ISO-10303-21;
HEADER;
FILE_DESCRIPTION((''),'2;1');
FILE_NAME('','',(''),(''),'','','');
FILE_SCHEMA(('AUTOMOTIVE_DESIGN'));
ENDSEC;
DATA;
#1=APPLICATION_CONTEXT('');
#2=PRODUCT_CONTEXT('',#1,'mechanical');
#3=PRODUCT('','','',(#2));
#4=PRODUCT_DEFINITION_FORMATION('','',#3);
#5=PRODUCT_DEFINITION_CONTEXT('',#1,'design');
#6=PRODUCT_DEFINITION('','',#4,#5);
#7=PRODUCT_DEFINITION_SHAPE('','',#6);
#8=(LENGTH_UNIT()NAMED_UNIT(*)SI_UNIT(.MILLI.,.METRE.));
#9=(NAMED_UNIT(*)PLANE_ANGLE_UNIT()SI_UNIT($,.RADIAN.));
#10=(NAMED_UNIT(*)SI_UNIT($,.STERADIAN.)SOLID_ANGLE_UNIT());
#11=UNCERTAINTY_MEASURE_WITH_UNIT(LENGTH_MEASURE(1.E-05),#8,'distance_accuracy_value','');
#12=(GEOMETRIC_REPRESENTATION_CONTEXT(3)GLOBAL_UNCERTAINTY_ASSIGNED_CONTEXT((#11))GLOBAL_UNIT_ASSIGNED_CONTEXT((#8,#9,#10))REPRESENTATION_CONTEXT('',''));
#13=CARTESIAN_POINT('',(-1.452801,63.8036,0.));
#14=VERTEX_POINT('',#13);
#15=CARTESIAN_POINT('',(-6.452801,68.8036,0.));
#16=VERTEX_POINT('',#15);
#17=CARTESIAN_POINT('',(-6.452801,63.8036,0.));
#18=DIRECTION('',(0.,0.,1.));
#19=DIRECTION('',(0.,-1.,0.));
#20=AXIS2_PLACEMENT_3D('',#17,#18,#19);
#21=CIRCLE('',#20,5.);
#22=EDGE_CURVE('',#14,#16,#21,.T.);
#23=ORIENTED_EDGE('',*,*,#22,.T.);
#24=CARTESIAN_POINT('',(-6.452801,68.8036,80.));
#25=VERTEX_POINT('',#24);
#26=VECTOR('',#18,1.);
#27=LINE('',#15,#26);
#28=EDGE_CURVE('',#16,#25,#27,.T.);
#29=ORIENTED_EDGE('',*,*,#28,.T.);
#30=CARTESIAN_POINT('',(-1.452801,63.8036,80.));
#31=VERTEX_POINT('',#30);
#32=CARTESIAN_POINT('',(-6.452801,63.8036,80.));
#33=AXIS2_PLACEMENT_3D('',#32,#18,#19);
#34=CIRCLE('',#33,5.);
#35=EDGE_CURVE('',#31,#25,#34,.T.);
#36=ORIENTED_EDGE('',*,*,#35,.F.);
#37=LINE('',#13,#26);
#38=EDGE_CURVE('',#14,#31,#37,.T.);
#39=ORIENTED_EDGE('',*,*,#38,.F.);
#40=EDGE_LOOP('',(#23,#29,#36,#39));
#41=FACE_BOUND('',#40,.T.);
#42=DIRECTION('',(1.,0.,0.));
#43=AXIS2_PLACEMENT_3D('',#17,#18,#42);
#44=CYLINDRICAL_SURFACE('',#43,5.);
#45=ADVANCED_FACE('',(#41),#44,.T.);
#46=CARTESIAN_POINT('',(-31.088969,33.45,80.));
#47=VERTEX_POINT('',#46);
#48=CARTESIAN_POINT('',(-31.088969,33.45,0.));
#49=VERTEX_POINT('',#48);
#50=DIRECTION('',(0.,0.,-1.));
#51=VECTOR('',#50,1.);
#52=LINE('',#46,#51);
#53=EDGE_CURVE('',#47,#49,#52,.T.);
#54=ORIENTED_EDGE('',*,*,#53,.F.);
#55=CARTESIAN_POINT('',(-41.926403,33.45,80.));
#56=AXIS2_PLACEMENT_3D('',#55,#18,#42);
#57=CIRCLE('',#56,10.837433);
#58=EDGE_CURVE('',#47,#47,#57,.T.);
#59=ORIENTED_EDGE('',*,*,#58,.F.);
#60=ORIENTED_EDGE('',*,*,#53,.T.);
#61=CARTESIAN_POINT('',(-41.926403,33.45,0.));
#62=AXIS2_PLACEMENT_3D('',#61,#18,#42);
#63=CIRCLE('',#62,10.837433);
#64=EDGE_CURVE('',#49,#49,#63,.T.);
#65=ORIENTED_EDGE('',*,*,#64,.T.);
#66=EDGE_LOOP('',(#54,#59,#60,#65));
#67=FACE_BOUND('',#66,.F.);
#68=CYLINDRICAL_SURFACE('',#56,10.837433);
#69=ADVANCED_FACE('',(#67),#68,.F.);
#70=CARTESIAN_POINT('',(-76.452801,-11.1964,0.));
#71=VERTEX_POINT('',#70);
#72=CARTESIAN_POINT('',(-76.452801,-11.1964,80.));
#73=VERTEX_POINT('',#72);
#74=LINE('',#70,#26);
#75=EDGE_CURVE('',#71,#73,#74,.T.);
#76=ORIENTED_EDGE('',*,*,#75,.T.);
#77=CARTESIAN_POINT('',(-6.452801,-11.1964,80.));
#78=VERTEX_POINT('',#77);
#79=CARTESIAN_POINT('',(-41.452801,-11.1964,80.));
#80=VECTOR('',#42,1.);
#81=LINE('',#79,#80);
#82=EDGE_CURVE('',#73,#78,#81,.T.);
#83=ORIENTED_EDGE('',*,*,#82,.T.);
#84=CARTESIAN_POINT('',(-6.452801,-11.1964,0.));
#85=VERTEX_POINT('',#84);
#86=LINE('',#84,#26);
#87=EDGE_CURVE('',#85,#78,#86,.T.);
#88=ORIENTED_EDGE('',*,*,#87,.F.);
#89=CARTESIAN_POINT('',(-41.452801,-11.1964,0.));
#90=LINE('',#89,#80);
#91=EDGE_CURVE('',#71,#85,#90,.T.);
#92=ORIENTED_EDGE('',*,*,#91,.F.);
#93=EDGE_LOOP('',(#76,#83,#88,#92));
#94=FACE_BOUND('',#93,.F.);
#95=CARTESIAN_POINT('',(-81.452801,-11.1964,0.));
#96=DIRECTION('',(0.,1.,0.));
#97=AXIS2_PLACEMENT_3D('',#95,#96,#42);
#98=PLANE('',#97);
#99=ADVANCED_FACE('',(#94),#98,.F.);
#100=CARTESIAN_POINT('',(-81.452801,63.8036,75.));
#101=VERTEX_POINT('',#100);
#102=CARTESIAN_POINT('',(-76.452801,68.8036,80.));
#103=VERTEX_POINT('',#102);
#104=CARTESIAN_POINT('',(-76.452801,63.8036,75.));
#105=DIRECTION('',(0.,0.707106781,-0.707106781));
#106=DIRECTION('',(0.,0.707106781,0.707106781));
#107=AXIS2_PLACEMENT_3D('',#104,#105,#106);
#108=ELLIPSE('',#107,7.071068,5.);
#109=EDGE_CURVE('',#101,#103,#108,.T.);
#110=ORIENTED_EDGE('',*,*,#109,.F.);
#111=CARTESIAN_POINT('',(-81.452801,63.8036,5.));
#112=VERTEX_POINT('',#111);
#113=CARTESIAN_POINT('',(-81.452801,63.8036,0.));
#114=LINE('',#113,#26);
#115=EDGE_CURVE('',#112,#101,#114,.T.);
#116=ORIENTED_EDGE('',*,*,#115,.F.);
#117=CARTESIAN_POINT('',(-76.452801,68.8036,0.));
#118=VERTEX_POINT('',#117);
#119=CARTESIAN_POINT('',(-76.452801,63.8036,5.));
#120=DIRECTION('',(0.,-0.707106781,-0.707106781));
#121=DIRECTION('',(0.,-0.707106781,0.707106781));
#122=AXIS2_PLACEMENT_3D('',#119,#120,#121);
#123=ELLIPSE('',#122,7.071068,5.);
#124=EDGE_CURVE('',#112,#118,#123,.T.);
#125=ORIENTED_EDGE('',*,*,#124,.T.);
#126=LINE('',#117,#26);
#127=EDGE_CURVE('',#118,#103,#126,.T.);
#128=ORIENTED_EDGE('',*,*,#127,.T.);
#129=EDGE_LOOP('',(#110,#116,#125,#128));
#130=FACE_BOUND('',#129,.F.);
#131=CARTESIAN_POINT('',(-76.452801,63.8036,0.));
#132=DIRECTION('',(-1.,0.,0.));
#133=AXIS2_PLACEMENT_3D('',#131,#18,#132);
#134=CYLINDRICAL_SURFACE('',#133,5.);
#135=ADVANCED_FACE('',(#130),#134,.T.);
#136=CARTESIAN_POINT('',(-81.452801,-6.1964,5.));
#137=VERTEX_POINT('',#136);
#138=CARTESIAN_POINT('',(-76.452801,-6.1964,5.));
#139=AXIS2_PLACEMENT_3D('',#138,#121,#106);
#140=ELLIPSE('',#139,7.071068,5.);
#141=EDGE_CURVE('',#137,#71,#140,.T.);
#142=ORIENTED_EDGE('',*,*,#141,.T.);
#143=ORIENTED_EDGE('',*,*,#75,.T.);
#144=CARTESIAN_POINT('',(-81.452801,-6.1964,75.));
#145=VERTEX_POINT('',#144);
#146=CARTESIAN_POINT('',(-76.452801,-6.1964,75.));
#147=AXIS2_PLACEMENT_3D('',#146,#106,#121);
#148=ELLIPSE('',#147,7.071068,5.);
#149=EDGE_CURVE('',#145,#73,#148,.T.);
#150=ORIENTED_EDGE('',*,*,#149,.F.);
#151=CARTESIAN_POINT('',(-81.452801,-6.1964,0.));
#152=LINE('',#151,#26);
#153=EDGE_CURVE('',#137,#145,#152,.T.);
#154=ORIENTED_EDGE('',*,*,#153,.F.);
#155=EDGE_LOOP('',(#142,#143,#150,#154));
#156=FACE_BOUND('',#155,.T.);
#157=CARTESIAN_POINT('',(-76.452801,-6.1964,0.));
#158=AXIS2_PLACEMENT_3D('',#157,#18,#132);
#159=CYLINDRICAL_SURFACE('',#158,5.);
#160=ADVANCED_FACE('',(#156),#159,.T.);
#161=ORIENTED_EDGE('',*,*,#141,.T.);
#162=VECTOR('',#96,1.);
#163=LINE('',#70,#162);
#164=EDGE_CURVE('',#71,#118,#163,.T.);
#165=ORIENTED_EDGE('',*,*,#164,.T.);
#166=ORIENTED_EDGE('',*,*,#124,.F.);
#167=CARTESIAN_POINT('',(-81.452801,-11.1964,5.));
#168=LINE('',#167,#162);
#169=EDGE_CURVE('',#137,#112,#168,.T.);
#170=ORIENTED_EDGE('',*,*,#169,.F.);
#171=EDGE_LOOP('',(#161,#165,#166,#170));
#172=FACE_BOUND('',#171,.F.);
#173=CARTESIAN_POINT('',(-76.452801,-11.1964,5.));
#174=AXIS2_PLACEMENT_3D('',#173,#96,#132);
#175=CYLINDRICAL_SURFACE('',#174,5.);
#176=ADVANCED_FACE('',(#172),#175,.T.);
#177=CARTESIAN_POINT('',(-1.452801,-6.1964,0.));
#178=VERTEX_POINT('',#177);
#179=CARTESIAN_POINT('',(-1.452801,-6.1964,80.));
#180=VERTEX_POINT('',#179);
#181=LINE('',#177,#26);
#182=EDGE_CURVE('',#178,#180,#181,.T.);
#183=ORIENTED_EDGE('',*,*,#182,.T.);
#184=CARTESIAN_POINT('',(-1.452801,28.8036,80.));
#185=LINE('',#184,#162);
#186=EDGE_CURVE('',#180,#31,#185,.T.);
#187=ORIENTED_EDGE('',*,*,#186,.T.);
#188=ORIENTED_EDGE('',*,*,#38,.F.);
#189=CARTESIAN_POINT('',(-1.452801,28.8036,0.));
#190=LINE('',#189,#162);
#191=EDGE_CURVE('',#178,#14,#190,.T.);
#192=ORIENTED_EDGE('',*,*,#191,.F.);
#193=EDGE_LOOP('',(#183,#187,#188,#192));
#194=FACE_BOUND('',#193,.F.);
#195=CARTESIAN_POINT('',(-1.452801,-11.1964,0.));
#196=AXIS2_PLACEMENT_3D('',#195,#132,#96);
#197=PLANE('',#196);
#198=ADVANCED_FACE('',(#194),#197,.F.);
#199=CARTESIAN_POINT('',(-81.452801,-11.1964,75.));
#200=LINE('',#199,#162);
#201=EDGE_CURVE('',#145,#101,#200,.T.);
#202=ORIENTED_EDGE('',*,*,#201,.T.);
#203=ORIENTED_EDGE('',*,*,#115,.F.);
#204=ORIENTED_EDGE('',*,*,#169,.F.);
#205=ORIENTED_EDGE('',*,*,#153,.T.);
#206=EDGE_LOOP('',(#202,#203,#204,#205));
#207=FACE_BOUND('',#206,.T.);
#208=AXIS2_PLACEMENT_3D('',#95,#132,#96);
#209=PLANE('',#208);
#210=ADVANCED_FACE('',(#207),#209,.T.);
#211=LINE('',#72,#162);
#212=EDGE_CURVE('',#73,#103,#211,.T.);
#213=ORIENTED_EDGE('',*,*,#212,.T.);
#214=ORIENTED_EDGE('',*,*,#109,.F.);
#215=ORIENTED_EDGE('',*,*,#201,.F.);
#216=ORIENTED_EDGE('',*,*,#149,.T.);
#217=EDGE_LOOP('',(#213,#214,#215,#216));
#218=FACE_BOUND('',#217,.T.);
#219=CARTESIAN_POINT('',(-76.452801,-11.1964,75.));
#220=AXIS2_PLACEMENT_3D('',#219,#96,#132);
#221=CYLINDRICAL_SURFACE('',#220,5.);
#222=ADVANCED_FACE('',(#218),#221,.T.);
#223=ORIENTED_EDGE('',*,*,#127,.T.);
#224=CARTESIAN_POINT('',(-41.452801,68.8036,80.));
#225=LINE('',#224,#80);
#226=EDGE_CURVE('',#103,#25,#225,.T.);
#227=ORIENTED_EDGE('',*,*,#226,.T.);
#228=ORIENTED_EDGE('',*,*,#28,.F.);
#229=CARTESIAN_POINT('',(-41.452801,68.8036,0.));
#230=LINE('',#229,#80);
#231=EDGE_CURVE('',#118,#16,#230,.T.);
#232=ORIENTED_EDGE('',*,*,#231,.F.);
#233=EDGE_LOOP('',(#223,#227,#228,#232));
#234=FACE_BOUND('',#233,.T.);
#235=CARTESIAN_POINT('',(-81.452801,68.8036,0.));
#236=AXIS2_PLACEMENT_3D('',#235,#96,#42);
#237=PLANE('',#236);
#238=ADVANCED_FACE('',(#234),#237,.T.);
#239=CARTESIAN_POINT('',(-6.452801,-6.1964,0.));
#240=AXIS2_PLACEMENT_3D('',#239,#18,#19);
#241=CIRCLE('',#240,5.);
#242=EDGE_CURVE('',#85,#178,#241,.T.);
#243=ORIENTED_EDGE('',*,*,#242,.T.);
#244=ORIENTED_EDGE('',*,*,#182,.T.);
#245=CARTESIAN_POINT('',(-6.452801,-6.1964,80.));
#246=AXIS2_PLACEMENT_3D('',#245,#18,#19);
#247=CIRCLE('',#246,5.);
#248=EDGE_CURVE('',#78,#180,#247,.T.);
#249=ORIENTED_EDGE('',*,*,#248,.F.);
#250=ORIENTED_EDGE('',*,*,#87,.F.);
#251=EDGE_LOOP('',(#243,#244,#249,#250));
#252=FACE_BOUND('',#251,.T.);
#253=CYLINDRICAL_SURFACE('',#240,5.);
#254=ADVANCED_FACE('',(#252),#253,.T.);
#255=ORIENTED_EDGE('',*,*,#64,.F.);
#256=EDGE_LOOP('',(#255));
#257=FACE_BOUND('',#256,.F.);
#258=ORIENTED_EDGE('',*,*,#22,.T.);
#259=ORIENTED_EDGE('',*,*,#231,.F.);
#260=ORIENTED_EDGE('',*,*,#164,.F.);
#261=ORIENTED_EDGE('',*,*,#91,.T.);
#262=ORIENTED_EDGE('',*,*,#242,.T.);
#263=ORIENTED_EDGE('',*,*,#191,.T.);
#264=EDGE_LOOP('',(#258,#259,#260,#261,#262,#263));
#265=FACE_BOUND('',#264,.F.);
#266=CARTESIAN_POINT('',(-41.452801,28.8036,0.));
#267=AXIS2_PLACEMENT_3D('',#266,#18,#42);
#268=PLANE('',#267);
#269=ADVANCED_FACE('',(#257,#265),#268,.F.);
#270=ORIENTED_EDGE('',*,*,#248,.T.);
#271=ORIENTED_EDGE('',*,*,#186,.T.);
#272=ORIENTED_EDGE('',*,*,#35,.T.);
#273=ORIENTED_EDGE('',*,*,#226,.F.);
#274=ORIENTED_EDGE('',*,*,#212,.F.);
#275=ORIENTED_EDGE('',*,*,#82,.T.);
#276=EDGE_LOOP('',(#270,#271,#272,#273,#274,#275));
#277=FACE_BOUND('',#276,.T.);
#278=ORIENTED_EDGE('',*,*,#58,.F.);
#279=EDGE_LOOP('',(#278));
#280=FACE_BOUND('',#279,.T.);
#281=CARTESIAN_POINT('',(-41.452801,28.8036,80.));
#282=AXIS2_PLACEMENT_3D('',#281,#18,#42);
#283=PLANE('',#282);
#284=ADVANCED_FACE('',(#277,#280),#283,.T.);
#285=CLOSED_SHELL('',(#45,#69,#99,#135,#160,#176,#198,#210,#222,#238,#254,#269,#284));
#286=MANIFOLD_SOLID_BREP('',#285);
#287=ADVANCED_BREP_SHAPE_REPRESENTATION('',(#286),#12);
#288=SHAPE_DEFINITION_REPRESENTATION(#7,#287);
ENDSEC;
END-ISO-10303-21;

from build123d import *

# Parameters (mm, degrees)
F0_W     = 80
F0_H     = 80
F1_DEPTH = 80
F3_R     = 5
F2_R     = 10.8374332622
F4_DEPTH = 80.001


with BuildPart() as f1:
    # F0 (on Top) → F1 (new body)
    with BuildSketch(Plane.XY):
        with Locations((-41.452800855, 28.8035999984)):
            Rectangle(F0_W, F0_H)
    extrude(amount=F1_DEPTH)

    # F3
    f3_edges = [f1.edges().sort_by_distance(p)[0] for p in [
        (-81.452801, -11.1964, 40),
        (-1.452801, -11.1964, 40),
        (-1.452801, 68.8036, 40),
        (-81.452801, 68.8036, 40),
        (-81.452801, 28.8036, 0),
        (-81.452801, 28.8036, 80),
    ]]
    fillet(f3_edges, radius=F3_R)

    # F2 (on face) → F4 (cut, through all)
    with BuildSketch(Plane.XY.offset(80)):
        with Locations((-41.9264025986, 33.4499999881)):
            Circle(F2_R)
    extrude(amount=-F4_DEPTH, mode=Mode.SUBTRACT)


solid = f1.part
